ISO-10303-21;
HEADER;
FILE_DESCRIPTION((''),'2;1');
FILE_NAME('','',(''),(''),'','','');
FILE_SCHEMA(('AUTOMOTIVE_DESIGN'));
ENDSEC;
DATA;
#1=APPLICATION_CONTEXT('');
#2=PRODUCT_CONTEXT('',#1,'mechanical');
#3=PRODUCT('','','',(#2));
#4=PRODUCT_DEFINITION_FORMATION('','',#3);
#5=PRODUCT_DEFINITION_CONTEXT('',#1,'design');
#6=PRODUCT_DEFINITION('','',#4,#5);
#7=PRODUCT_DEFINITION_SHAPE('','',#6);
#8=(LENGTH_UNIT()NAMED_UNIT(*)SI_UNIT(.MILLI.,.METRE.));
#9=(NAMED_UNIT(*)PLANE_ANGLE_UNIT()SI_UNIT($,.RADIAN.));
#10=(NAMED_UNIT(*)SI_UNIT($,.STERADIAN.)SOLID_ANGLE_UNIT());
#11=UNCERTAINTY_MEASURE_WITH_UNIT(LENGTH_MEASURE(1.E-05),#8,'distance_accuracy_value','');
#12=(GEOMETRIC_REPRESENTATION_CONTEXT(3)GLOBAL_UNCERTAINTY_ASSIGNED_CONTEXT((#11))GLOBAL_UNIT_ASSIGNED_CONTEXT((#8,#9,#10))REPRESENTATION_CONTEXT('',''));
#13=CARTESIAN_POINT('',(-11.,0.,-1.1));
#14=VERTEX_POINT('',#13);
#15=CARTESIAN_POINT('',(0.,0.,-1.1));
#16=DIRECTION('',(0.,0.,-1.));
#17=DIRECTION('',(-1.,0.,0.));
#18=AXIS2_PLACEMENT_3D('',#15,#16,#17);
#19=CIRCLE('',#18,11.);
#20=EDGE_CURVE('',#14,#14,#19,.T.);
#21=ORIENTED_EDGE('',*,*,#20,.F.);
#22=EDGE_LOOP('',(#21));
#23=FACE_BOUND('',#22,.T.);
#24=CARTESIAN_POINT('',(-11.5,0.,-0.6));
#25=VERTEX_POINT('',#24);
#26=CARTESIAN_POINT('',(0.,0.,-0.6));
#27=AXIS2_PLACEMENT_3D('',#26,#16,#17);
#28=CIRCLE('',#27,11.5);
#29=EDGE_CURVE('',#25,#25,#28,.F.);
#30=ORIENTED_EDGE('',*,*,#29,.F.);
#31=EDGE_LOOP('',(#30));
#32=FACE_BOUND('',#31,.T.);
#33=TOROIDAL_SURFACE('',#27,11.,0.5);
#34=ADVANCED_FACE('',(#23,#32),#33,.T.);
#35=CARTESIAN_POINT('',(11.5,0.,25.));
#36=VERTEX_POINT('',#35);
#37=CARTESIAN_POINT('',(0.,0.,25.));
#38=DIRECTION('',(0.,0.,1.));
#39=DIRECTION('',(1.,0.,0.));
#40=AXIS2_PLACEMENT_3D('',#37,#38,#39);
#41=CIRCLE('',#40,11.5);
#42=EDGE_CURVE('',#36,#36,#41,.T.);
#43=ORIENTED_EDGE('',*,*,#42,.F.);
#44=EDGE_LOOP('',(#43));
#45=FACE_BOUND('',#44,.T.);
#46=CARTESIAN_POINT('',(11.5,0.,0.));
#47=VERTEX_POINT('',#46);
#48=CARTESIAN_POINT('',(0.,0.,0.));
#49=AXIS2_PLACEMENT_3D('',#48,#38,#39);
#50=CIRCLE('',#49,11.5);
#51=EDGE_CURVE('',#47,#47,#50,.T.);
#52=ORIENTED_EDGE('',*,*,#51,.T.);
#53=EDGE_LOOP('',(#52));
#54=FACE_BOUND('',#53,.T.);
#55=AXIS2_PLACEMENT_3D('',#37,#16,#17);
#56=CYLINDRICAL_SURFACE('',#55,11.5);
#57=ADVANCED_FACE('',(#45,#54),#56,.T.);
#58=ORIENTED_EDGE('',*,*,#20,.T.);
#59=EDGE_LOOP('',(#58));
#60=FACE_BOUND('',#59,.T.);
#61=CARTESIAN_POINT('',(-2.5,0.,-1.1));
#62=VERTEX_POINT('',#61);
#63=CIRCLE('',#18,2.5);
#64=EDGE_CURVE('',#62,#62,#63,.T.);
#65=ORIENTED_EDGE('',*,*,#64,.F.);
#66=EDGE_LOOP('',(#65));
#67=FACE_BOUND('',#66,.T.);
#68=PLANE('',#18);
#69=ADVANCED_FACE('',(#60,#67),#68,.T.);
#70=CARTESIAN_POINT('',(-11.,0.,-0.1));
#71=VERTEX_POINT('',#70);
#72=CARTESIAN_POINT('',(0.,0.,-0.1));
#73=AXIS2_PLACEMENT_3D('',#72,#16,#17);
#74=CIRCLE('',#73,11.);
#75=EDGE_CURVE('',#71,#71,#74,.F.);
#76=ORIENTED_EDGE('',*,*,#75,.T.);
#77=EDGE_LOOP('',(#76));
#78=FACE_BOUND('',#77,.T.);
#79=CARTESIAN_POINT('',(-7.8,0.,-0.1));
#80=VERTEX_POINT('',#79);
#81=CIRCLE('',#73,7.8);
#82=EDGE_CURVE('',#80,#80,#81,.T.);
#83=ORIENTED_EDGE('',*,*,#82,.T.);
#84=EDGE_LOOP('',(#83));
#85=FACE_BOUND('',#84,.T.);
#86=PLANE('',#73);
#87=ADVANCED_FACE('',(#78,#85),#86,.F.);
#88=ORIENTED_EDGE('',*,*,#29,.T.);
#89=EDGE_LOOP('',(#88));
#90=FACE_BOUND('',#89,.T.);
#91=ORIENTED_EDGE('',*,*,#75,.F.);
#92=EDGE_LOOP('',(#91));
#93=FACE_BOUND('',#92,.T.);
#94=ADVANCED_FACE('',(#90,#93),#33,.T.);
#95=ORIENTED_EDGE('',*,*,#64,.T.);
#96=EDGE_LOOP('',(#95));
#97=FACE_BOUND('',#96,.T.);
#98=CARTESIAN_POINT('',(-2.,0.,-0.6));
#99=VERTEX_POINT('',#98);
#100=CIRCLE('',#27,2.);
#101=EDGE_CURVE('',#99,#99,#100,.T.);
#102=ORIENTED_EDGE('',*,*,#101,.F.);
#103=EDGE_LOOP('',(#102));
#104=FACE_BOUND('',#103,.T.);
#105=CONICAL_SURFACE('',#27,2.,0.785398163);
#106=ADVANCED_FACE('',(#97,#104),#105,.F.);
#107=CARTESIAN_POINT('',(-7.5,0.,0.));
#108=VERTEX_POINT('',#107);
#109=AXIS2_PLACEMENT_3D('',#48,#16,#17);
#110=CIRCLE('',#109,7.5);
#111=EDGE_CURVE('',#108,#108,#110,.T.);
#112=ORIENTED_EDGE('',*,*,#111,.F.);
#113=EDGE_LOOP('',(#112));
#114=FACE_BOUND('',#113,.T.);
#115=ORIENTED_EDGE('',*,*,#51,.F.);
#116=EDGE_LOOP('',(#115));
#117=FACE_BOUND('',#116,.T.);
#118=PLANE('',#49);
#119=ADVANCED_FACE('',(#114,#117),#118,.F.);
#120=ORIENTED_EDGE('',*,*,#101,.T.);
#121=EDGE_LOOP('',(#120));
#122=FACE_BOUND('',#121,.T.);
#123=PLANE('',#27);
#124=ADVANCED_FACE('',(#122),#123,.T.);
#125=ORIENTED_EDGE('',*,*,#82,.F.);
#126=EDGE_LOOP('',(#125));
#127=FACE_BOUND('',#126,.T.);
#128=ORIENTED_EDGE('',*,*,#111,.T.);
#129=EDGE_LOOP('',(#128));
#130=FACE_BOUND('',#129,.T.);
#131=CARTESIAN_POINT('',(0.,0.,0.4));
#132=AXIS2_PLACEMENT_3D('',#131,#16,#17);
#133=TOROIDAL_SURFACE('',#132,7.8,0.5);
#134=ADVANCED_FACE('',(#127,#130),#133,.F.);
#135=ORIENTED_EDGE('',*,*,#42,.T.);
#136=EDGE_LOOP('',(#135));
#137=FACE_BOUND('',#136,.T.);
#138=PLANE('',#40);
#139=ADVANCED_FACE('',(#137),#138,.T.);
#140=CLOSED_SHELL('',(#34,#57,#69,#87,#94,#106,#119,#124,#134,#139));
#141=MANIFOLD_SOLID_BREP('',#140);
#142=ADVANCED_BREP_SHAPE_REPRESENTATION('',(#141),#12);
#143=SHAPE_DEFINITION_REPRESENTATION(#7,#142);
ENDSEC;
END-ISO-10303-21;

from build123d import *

# Parameters (mm, degrees)
SKETCH_1_R          = 11.5
EXTRUDE_1_DEPTH     = 25
SKETCH_2_R          = 7.5
EXTRUDE_2_DEPTH     = 0.1
EXTRUDE_START       = 1
SKETCH_3_R          = 11.5
EXTRUDE_3_DEPTH     = 1
FILLET_1_R          = 0.5
FILLET_2_R          = 0.5
SKETCH_4_R          = 2.5
CUT_EXTRUDE_1_DEPTH = 0.5
CHAMFER_1_SIZE      = 0.5


# Some blends are built 0.0001 mm under size
with BuildPart() as part:
    # 草图1 → 凸台-拉伸1 (new body)
    with BuildSketch(Plane.XY):
        Circle(SKETCH_1_R)
    extrude(amount=EXTRUDE_1_DEPTH)

    # 草图2 → 凸台-拉伸2 (add)
    with BuildSketch(Plane(origin=(0, 0, 0), x_dir=(-1, 0, 0), z_dir=(0, 0, -1))):
        Circle(SKETCH_2_R)
    extrude(amount=EXTRUDE_2_DEPTH)

    # 草图3 → 凸台-拉伸3 (add)
    with BuildSketch(Plane(origin=(0, 0, -0.1), x_dir=(-1, 0, 0), z_dir=(0, 0, -1)).offset(EXTRUDE_START)):
        with Locations(Location((0, 0, 0), (0, 0, 180))):
            Circle(SKETCH_3_R)
    extrude(amount=-EXTRUDE_3_DEPTH)

    # 圆角1
    fillet_1_edges = [part.edges().sort_by_distance(p)[0] for p in [
        (-11.5, 0, -1.1),
    ]]
    fillet(fillet_1_edges, radius=FILLET_1_R)

    # 圆角2
    # the kernel refuses this fillet: 0.5 mm, written as the material it adds along each edge
    with BuildSketch(Plane(origin=(0, 0, -0.1), x_dir=(-1, 0, 0), z_dir=(0, -1, 0))) as fillet_2_piece_1:
        with BuildLine():
            CenterArc((7.8, -0.5), FILLET_2_R, 90, 36.869897646)
            Line((7.5, -0.1), (7.5, 0))
            Line((7.5, 0), (7.8, 0))
        make_face()
    revolve(axis=Axis((0, 0, -0.1), (0, 0, -1)))
    # the kernel refuses this fillet: 0.5 mm, written as the material it takes off along each edge
    with BuildSketch(Plane(origin=(0, 0, -0.1), x_dir=(1, 0, 0), z_dir=(0, 1, 0))) as fillet_2_2_piece_1:
        with BuildLine():
            CenterArc((11.5 - FILLET_2_R, FILLET_2_R), FILLET_2_R, 270, 90)
            Line((11.5 - FILLET_2_R, 0), (11.5, 0))
            Line((11.5, 0), (11.5, FILLET_2_R))
        make_face()
    revolve(axis=Axis((0, 0, -0.1), (0, 0, -1)), mode=Mode.SUBTRACT)

    # 草图4 → 切除-拉伸1 (cut)
    with BuildSketch(Plane(origin=(0, 0, -1.1), x_dir=(-1, 0, 0), z_dir=(0, 0, -1))):
        Circle(SKETCH_4_R)
    extrude(amount=-CUT_EXTRUDE_1_DEPTH, mode=Mode.SUBTRACT)

    # 倒角1
    chamfer_1_edges = [part.edges().sort_by_distance(p)[0] for p in [
        (2.5, 0, -0.6),
    ]]
    chamfer(chamfer_1_edges, length=CHAMFER_1_SIZE - 0.0001)  # a hair under: the kernel refuses the full size


solid = part.part
